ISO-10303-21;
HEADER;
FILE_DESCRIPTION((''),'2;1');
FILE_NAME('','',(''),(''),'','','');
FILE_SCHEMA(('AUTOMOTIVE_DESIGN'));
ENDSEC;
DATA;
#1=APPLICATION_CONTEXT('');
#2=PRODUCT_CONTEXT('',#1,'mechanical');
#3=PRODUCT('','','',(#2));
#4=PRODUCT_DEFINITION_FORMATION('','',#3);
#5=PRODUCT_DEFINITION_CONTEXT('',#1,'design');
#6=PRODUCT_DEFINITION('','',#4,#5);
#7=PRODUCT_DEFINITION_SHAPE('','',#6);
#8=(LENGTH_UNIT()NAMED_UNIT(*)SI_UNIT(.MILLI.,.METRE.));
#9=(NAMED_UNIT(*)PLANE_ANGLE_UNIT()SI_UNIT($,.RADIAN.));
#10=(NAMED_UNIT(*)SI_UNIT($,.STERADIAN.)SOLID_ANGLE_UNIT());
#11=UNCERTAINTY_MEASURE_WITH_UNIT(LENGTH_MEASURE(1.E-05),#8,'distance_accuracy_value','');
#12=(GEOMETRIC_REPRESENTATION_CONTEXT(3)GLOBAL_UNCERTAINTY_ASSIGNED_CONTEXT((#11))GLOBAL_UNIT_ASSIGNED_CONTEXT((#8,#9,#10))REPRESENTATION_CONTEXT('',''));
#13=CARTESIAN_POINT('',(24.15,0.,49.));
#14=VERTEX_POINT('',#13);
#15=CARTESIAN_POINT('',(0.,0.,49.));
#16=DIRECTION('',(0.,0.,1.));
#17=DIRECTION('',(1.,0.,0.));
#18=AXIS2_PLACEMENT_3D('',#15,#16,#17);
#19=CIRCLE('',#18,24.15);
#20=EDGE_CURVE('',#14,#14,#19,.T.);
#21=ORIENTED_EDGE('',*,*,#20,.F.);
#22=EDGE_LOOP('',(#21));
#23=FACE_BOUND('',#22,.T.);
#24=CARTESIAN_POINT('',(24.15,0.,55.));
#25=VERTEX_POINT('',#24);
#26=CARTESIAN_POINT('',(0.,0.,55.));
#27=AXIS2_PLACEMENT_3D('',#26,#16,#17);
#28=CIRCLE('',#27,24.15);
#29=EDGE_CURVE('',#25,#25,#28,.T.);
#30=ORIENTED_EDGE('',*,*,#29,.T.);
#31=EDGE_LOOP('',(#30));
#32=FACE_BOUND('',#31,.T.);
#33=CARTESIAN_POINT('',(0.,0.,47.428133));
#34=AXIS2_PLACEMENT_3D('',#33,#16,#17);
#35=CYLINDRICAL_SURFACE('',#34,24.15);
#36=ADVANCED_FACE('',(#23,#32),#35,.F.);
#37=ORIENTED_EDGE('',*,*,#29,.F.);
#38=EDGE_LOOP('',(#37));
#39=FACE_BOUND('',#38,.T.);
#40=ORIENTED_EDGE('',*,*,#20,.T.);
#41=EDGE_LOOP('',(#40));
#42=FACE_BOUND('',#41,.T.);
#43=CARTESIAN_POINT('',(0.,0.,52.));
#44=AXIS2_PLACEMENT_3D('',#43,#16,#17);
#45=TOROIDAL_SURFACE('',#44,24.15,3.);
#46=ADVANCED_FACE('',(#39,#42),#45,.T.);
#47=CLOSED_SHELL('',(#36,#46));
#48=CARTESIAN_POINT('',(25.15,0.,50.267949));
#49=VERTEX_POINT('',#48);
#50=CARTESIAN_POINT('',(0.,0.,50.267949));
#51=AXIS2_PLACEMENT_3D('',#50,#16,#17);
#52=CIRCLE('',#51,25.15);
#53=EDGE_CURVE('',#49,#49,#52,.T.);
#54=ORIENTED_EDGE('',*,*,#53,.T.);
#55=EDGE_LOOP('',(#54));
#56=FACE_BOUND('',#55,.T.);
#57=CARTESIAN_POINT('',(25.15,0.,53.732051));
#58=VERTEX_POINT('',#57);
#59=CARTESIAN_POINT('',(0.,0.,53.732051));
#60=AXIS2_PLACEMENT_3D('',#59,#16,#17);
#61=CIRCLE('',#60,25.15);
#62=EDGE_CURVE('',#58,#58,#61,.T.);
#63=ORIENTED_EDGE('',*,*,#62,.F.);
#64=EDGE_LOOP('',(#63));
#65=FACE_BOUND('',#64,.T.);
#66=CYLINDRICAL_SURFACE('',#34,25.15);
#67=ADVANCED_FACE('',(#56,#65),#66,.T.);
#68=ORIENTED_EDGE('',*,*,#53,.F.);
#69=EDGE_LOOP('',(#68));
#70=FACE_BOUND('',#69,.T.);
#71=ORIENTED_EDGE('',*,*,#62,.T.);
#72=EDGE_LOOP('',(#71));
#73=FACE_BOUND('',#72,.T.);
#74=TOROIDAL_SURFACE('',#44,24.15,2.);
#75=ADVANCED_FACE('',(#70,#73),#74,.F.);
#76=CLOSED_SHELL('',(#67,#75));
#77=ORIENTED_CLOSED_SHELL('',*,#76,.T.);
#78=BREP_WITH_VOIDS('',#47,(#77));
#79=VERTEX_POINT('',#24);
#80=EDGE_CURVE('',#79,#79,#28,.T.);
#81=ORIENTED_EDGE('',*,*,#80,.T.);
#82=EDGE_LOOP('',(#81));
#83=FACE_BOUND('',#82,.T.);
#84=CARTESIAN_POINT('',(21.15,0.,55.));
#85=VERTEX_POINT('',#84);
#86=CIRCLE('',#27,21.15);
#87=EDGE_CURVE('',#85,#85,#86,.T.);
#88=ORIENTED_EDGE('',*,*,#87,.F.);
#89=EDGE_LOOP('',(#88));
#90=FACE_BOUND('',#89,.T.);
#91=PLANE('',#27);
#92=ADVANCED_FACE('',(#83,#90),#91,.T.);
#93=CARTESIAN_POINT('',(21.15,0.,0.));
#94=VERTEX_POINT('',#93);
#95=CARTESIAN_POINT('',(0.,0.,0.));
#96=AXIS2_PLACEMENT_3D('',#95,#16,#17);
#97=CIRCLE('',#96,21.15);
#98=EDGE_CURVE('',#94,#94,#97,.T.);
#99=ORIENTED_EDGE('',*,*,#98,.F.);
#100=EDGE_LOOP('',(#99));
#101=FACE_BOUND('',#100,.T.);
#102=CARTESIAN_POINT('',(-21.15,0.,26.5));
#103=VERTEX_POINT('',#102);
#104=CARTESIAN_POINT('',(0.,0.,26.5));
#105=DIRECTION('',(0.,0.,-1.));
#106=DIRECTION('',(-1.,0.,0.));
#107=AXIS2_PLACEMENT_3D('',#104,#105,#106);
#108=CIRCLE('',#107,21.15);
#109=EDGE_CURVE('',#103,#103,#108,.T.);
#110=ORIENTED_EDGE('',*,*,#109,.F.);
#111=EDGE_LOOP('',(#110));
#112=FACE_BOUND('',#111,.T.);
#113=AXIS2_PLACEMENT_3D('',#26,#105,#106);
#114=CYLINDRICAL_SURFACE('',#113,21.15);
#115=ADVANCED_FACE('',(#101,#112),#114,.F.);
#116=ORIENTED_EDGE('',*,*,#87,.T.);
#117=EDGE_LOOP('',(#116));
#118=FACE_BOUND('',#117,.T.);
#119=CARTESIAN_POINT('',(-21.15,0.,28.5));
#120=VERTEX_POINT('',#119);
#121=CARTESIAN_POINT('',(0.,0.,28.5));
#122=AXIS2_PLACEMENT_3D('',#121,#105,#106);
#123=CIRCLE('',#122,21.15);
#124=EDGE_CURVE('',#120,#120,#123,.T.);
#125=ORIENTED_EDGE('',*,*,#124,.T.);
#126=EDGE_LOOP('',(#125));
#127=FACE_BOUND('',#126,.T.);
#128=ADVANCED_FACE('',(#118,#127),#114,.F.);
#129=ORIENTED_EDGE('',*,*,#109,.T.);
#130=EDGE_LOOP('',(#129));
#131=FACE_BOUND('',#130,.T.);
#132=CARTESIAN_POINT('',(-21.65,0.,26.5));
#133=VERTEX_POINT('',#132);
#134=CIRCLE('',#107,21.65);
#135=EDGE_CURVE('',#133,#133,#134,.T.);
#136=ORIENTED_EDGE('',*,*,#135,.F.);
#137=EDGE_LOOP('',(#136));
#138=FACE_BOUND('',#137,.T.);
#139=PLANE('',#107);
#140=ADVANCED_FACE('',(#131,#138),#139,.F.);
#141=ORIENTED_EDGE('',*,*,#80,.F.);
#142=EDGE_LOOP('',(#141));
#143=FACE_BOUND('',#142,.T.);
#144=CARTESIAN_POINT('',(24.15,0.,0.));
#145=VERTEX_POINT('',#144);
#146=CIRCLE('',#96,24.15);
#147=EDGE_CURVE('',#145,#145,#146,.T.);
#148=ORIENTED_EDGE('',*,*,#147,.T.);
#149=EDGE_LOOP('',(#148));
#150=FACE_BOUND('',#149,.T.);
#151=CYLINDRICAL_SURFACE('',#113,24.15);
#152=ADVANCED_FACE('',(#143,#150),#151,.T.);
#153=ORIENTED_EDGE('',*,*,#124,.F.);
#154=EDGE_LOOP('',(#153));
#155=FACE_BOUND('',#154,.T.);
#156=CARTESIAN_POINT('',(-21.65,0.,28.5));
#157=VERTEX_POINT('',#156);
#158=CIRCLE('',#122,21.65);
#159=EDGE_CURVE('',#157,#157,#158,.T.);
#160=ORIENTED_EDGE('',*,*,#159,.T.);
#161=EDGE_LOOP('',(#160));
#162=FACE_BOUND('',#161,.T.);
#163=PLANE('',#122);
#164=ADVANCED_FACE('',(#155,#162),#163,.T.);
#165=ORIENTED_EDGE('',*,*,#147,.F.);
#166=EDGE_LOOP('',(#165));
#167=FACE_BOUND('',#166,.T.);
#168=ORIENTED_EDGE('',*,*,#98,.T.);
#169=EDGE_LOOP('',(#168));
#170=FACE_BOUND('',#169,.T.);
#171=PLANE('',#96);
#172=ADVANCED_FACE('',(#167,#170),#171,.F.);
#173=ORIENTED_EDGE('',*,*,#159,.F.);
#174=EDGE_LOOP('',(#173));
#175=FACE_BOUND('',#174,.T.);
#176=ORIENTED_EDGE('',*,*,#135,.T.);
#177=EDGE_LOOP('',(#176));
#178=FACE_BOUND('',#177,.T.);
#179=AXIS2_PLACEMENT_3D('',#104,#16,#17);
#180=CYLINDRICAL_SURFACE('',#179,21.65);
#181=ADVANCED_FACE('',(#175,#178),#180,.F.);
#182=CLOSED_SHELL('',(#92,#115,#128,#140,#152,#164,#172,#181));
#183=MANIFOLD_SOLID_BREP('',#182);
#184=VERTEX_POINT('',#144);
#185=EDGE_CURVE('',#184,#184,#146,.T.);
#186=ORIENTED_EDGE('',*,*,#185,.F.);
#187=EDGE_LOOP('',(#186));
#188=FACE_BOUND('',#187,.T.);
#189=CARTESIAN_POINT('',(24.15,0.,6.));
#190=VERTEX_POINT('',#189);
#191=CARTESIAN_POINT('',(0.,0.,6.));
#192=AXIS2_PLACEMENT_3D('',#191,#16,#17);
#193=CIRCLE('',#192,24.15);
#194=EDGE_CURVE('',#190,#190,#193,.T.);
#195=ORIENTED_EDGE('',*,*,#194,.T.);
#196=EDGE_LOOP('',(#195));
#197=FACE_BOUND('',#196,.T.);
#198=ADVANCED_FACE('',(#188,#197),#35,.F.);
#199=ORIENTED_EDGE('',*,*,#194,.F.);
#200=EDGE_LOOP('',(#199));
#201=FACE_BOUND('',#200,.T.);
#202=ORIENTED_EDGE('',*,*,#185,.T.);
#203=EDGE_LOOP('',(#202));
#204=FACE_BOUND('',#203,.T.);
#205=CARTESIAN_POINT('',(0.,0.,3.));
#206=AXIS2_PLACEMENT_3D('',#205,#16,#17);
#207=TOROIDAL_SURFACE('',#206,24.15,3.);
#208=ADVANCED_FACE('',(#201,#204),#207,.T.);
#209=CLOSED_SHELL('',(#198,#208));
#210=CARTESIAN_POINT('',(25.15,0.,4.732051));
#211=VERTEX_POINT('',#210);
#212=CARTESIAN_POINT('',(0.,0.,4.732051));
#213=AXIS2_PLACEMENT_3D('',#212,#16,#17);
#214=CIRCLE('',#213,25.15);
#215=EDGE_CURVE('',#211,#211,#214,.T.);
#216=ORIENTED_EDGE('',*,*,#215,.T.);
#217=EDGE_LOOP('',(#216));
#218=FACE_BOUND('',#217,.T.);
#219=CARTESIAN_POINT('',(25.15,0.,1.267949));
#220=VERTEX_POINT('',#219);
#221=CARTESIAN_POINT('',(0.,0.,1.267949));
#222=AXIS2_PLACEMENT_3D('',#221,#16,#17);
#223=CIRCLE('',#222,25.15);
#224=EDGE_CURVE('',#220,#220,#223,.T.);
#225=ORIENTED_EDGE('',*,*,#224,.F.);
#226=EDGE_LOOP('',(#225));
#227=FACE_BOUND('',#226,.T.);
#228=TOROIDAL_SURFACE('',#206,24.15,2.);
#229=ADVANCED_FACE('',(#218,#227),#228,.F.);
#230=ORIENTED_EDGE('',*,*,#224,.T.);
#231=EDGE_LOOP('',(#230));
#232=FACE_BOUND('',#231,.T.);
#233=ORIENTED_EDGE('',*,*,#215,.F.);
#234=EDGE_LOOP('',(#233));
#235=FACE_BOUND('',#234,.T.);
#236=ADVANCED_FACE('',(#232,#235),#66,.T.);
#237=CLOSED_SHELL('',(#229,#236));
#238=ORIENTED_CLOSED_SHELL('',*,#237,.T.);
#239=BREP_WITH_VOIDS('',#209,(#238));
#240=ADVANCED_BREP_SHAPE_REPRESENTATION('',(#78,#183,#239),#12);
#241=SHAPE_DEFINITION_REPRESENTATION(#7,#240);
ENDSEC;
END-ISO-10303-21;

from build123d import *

# Parameters (mm, degrees)
SKETCH1_R                = 24.15
SKETCH1_R_2              = 21.15
EXTRUDE1_DEPTH           = 55
CUT_EXTRUDE_1_DEPTH      = 1
CUT_EXTRUDE_1_DEPTH_BACK = 1
SKETCH_1_R               = 21.65
SKETCH_1_R_2             = 20.65


# Read off the part's stored shape, not the designer's step: Revolve-Thin2
with BuildPart() as part:
    # Sketch1 → Extrude1 (new body)
    with BuildSketch(Plane.XY):
        Circle(SKETCH1_R)
        Circle(SKETCH1_R_2, mode=Mode.SUBTRACT)
    extrude(amount=EXTRUDE1_DEPTH)

    # Эскиз1 → Вырез-Вытянуть-Тонкостенный1 (cut, two sides: drawn at the far end of the back side and taken through both)
    with BuildSketch(Plane(origin=(0, 0, 27.5), x_dir=(-1, 0, 0), z_dir=(0, 0, -1)).offset(-CUT_EXTRUDE_1_DEPTH_BACK)):
        Circle(SKETCH_1_R)
        Circle(SKETCH_1_R_2, mode=Mode.SUBTRACT)
    extrude(amount=CUT_EXTRUDE_1_DEPTH + CUT_EXTRUDE_1_DEPTH_BACK, mode=Mode.SUBTRACT)


with BuildPart() as body_2:
    # Revolve-Thin2 outline → Revolve-Thin2 (revolve)
    # profile 1 of 2: a face of its own
    with BuildSketch(Plane.XZ):
        with BuildLine():
            Line((24.15, 6), (24.15, 0))
            ThreePointArc((24.15, 0), (27.15, 3), (24.15, 6))
        make_face()
        with BuildLine():
            Line((25.15, 1.267949192), (25.15, 4.732050808))
            ThreePointArc((25.15, 4.732050808), (26.15, 3), (25.15, 1.267949192))
        make_face(mode=Mode.SUBTRACT)
    # profile 2 of 2: a face of its own
    with BuildSketch(Plane.XZ):
        with BuildLine():
            Line((24.15, 55), (24.15, 49))
            ThreePointArc((24.15, 49), (27.15, 52), (24.15, 55))
        make_face()
        with BuildLine():
            Line((25.15, 50.267949192), (25.15, 53.732050808))
            ThreePointArc((25.15, 53.732050808), (26.15, 52), (25.15, 50.267949192))
        make_face(mode=Mode.SUBTRACT)
    revolve(axis=Axis((0, 0, 0), (0, 0, 1)))


solid = Compound([part.part, body_2.part])
